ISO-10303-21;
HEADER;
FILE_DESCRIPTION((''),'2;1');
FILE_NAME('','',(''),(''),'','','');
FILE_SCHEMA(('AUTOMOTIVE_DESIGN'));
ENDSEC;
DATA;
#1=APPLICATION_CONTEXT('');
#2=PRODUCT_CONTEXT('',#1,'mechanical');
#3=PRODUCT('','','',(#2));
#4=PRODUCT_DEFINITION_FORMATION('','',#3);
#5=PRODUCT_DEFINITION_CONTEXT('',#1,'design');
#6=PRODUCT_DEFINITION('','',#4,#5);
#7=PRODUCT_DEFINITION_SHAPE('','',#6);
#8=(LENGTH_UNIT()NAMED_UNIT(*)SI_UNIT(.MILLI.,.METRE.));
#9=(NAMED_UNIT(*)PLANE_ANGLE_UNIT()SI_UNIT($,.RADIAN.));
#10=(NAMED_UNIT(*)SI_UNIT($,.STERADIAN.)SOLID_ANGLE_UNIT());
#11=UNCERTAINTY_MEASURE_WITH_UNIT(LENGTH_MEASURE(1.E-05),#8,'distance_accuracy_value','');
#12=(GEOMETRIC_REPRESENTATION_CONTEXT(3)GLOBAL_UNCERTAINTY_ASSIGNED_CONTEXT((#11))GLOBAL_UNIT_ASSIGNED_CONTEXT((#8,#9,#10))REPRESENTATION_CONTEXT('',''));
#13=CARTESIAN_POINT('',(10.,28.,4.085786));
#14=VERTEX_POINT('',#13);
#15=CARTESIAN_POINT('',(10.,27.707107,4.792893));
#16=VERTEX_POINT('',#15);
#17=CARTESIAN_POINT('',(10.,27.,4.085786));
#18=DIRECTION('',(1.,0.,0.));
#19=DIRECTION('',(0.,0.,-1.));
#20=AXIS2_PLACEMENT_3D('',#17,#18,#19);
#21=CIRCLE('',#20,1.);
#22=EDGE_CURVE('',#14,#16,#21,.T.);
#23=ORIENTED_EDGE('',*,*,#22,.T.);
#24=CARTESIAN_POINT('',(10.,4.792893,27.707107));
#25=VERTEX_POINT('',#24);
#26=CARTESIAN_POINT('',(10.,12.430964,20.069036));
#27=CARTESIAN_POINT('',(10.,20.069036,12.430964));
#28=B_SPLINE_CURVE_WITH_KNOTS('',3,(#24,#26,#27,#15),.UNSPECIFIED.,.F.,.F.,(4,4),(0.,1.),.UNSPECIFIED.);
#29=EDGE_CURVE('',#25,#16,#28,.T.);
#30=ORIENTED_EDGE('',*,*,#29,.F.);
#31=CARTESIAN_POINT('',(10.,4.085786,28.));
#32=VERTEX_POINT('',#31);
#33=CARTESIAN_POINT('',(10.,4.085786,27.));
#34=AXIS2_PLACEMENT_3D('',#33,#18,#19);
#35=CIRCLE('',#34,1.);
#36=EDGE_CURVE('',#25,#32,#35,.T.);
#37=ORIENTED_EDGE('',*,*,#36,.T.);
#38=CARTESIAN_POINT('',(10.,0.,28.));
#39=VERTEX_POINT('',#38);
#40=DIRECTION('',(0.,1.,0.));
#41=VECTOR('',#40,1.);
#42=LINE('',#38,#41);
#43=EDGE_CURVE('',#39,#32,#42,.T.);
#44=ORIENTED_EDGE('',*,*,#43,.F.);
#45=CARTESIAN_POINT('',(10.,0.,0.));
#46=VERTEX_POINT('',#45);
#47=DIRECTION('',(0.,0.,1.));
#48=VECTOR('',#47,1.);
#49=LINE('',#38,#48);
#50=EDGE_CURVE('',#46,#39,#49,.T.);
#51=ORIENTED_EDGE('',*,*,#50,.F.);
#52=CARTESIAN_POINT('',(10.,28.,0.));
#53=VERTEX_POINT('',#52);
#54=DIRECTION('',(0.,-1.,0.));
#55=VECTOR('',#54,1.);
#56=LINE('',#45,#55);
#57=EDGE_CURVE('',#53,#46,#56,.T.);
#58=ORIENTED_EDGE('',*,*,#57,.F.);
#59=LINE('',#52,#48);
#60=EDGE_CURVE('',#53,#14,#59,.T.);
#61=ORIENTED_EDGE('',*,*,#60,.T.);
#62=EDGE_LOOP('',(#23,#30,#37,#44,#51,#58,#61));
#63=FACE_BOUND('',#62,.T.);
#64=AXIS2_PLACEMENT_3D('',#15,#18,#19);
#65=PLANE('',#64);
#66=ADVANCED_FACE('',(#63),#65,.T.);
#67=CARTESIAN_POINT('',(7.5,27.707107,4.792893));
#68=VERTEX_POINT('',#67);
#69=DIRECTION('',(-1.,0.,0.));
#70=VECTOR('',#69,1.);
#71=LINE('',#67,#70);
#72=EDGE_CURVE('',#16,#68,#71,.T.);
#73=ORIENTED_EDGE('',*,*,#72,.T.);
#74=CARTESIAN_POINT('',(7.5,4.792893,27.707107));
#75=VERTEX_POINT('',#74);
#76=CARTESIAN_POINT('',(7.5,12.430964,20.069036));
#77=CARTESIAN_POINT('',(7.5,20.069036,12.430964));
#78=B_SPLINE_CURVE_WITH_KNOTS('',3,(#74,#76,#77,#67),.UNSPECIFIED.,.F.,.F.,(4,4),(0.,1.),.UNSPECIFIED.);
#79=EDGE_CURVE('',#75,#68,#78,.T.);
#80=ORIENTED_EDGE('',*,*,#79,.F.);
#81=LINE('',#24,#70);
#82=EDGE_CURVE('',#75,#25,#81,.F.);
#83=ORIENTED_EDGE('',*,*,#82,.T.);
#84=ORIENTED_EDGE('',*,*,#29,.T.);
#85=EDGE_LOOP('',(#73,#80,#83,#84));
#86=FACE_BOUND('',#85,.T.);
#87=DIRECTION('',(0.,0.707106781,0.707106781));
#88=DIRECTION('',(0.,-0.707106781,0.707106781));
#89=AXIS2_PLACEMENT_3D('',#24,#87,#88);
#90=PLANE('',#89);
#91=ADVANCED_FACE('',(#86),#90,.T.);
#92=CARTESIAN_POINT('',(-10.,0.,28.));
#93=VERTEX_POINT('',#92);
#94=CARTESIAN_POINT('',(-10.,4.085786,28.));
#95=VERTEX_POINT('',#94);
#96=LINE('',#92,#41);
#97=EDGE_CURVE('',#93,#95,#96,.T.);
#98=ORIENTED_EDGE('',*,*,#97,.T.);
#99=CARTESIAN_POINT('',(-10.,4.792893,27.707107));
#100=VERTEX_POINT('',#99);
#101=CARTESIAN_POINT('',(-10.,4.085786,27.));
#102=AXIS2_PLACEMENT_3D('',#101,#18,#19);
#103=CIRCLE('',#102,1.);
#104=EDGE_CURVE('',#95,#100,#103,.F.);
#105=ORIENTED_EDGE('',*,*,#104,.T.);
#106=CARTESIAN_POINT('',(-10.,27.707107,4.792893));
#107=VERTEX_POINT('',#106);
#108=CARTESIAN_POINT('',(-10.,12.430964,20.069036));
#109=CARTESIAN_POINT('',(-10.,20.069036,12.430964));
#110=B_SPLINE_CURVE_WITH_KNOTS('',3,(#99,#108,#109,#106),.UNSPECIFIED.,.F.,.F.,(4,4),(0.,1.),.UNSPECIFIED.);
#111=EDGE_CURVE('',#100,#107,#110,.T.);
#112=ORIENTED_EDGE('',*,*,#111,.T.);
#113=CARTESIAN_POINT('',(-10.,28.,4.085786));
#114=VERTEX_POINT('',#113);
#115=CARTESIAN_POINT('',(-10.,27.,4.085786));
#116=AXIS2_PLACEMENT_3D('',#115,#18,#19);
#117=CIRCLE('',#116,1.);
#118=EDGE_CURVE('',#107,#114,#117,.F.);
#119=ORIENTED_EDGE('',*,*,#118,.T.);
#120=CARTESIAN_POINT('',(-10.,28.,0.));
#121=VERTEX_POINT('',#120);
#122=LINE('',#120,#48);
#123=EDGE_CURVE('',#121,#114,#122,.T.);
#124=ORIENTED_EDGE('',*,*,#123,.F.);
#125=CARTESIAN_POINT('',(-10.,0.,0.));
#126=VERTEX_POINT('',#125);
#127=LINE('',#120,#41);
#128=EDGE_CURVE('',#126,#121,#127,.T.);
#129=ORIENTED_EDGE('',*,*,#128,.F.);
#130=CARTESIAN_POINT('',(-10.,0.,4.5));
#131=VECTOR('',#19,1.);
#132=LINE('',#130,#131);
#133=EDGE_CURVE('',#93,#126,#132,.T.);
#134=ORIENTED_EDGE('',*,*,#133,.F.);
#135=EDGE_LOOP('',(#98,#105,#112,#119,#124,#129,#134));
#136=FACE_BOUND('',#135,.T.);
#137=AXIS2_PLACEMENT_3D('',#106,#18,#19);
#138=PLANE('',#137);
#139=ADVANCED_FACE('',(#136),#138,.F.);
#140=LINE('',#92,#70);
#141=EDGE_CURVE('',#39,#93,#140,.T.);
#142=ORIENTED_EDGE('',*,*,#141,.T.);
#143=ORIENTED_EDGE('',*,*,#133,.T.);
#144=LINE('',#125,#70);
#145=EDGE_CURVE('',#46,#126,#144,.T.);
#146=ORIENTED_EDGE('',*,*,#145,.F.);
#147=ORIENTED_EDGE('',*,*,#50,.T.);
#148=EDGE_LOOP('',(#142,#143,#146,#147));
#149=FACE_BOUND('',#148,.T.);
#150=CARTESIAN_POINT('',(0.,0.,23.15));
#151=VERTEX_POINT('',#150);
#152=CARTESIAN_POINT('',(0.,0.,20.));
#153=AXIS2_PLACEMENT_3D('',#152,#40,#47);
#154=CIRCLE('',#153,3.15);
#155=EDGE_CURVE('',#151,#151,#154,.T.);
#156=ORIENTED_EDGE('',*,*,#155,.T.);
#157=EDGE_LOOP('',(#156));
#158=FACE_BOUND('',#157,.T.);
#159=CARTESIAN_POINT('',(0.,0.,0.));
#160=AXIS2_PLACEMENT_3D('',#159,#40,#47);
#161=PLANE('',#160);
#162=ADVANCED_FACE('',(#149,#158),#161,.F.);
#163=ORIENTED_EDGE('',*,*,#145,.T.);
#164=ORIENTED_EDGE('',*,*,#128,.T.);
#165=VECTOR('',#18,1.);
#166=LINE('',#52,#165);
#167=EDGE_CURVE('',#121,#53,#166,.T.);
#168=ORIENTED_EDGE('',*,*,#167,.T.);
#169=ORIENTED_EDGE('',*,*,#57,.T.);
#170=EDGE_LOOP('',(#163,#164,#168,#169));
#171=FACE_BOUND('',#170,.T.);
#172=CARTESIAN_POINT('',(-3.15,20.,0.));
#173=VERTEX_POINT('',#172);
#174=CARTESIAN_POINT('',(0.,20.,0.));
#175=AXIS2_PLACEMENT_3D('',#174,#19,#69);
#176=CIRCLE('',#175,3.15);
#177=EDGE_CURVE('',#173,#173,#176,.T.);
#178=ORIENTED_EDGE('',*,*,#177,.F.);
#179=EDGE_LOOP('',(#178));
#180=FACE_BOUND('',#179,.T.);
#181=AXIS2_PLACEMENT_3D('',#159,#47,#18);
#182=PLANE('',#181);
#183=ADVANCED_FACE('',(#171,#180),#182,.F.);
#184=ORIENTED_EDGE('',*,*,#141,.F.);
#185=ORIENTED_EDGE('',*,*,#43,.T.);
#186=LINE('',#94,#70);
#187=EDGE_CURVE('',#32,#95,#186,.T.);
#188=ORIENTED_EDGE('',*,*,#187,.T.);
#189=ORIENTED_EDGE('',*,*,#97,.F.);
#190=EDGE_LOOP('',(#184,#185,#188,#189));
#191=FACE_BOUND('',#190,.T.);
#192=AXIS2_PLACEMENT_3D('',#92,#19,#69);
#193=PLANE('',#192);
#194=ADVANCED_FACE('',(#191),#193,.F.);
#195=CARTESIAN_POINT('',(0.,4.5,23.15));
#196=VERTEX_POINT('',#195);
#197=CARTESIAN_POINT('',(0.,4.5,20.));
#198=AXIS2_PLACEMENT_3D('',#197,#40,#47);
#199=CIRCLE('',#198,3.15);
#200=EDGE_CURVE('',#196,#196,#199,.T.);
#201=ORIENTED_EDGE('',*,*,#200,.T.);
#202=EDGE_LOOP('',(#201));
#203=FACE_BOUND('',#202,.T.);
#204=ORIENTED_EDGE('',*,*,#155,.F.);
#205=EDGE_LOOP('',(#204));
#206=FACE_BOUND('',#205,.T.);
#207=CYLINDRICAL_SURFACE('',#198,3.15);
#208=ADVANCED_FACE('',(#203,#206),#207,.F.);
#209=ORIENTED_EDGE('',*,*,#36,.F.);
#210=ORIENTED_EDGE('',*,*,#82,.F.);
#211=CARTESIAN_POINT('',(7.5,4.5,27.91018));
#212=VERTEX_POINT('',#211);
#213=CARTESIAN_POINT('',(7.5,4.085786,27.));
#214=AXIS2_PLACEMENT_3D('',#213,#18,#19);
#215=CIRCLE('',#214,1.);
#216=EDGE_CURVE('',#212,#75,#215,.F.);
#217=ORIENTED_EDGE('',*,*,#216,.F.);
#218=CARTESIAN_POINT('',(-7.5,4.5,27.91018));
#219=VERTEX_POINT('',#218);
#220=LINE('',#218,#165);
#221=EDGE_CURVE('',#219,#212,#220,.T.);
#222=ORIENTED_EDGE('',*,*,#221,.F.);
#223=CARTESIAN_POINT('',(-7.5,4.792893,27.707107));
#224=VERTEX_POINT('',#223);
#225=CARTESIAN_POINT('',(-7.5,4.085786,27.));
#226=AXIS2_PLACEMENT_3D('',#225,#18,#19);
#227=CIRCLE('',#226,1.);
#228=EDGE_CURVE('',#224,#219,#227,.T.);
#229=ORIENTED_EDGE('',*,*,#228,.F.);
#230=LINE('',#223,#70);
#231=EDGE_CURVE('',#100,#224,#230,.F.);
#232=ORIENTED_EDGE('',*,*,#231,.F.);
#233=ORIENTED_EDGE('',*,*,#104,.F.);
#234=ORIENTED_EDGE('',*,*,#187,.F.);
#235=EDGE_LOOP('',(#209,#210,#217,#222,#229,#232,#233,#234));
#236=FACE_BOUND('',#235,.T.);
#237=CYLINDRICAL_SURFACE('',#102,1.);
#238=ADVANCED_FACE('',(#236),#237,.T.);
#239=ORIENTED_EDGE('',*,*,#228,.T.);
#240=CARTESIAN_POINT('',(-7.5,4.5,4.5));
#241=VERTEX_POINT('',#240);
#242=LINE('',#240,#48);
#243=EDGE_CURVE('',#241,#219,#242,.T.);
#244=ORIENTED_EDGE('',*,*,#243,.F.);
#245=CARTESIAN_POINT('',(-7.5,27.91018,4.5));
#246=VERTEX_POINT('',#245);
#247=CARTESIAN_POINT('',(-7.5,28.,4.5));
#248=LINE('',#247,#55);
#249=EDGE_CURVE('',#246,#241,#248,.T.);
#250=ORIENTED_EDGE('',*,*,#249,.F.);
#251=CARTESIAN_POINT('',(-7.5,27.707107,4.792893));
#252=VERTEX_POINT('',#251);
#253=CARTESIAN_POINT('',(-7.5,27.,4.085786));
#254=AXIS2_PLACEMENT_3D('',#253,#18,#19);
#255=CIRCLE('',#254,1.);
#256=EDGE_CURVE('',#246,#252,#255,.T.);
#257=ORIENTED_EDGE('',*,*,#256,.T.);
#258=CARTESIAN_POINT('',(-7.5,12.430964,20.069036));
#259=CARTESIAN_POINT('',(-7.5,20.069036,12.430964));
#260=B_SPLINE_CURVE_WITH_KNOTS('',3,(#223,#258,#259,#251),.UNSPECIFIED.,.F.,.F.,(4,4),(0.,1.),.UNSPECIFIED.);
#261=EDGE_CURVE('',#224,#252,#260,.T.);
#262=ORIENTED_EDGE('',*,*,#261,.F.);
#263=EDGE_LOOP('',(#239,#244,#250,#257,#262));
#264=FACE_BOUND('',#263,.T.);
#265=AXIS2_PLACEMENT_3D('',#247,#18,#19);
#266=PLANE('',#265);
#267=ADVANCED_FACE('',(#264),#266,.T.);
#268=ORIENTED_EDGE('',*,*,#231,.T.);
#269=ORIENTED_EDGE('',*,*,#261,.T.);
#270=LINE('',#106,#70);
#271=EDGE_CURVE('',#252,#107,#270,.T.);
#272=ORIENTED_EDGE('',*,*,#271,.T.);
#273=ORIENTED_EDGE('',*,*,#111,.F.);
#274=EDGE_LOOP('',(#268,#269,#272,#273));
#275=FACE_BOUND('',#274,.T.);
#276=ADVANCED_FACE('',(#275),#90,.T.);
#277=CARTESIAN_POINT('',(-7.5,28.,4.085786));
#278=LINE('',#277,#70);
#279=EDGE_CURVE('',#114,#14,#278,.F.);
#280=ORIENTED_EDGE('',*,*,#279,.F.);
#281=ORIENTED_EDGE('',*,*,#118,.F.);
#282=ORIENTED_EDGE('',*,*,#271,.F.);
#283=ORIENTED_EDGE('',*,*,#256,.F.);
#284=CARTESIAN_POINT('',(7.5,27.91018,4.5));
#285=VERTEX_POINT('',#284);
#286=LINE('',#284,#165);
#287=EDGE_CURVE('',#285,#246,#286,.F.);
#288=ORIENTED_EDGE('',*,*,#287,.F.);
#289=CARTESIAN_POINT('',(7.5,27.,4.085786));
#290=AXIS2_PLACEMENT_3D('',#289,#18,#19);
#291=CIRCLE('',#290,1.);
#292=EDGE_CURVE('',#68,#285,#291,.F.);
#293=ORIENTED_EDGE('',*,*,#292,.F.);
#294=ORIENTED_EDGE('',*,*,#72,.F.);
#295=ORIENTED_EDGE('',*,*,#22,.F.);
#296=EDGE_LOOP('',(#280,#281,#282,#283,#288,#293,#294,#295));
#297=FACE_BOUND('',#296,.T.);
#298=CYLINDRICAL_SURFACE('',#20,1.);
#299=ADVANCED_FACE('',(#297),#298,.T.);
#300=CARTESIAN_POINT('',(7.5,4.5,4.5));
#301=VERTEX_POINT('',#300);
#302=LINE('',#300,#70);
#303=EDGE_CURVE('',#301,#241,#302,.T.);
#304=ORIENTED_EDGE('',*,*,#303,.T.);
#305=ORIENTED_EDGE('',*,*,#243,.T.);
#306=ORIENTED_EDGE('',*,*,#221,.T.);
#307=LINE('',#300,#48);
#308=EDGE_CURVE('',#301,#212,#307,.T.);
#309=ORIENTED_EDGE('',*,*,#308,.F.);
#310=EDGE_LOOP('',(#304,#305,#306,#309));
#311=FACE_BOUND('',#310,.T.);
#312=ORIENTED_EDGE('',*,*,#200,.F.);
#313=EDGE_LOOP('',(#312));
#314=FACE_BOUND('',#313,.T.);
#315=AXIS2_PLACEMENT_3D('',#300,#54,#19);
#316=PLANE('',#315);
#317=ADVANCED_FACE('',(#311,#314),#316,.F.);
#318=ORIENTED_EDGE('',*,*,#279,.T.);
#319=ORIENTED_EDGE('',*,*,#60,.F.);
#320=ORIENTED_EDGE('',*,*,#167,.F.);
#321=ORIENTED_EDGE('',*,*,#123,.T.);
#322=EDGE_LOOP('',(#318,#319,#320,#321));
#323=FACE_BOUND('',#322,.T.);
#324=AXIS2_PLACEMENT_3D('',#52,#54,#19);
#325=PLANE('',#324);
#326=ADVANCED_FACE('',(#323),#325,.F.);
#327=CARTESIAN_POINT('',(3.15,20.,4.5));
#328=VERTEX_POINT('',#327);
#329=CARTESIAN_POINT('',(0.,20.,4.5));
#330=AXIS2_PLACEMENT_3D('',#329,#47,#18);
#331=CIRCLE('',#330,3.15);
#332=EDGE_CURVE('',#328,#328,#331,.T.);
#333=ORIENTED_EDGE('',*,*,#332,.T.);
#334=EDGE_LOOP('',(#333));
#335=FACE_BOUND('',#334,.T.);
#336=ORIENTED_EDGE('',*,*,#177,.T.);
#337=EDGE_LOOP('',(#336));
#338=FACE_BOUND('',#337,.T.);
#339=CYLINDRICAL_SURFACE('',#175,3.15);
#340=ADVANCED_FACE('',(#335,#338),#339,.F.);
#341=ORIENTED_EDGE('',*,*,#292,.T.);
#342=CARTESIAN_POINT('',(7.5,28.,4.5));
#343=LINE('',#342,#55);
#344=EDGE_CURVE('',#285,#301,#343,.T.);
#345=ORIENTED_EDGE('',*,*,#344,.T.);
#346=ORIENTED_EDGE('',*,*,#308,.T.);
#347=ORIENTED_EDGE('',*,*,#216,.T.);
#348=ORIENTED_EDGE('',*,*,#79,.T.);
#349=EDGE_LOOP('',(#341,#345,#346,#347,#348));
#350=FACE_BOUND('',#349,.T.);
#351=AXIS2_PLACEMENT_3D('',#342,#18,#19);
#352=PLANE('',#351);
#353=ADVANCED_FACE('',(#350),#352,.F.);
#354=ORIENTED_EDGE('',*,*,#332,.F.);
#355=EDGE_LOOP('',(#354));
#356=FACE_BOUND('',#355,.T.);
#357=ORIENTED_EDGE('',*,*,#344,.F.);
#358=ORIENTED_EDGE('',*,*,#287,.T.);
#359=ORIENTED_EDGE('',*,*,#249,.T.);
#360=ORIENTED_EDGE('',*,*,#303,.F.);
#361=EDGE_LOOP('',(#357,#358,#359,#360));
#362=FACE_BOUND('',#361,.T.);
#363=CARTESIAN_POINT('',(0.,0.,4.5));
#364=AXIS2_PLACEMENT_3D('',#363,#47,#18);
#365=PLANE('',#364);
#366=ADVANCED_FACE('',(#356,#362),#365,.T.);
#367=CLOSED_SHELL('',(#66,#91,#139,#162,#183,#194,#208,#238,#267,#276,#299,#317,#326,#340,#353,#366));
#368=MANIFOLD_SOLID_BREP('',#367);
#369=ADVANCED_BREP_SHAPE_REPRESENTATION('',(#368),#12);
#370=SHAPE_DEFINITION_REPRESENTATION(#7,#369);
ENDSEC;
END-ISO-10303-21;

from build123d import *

# Parameters (mm, degrees)
BOSS_EXTRUDE1_DEPTH            = 20
SKETCH2_W                      = 20
SKETCH2_H                      = 23.5
BOSS_EXTRUDE2_DEPTH            = 4.5
CUT_EXTRUDE1_DEPTH             = 15
SKETCH4_W                      = 20
SKETCH4_H                      = 28
BOSS_EXTRUDE3_DEPTH            = 4.5
F_6_3_6_3_DIAMETER_HOLE1_D     = 6.3
F_6_3_6_3_DIAMETER_HOLE1_DEPTH = 28
F_6_3_6_3_DIAMETER_HOLE2_D     = 6.3
FILLET2_START                  = -11
FILLET2_DEPTH                  = 22


with BuildPart() as part:
    # Sketch1 → Boss-Extrude1 (new body)
    with BuildSketch(Plane(origin=(-10, 0, 0), x_dir=(0, -1, 0), z_dir=(-1, 0, 0))):
        with BuildLine():
            Line((-28, 4.5), (-4.5, 4.5))
            Line((-4.5, 4.5), (-4.5, 28))
            Line((-4.5, 28), (-4.792893219, 27.707106781))
            add(Edge.make_bspline(
                [(-4.792893219, 27.707106781), (-12.430964406, 20.069035594), (-20.069035594, 12.430964406), (-27.707106781, 4.792893219)],
                knots=[0, 0, 0, 0, 1, 1, 1, 1], degree=3))
            Line((-27.707106781, 4.792893219), (-28, 4.5))
        make_face()
    extrude(amount=-BOSS_EXTRUDE1_DEPTH)

    # Sketch2 → Boss-Extrude2 (add)
    with BuildSketch(Plane.XZ.offset(-4.5)):
        with Locations((0, 16.25)):
            Rectangle(SKETCH2_W, SKETCH2_H)
    extrude(amount=BOSS_EXTRUDE2_DEPTH)

    # Sketch3 → Cut-Extrude1 (cut)
    with BuildSketch(Plane(origin=(-7.5, 0, 0), x_dir=(0, -1, 0), z_dir=(-1, 0, 0))):
        with BuildLine():
            Line((-4.5, 4.5), (-4.5, 28))
            Line((-4.5, 28), (-4.792893219, 27.707106781))
            add(Edge.make_bspline(
                [(-4.792893219, 27.707106781), (-12.430964406, 20.069035594), (-20.069035594, 12.430964406), (-27.707106781, 4.792893219)],
                knots=[0, 0, 0, 0, 1, 1, 1, 1], degree=3))
            Line((-27.707106781, 4.792893219), (-28, 4.5))
            Line((-28, 4.5), (-4.5, 4.5))
        make_face()
    extrude(amount=-CUT_EXTRUDE1_DEPTH, mode=Mode.SUBTRACT)

    # Sketch4 → Boss-Extrude3 (add)
    with BuildSketch(Plane(origin=(0, 0, 4.5), x_dir=(-1, 0, 0), z_dir=(0, 0, -1))):
        with Locations((0, 14)):
            Rectangle(SKETCH4_W, SKETCH4_H)
    extrude(amount=BOSS_EXTRUDE3_DEPTH)

    # Ø6.3 (6.3) Diameter Hole1
    with Locations(Plane(origin=(0, 0, 0), x_dir=(-1, 0, 0), z_dir=(0, 0, -1))):
        with Locations((0, 20)):
            Hole(F_6_3_6_3_DIAMETER_HOLE1_D / 2, depth=F_6_3_6_3_DIAMETER_HOLE1_DEPTH)

    # Ø6.3 (6.3) Diameter Hole2 (through all)
    with Locations(Plane(origin=(0, 4.5, 0), x_dir=(1, 0, 0), z_dir=(0, 1, 0))):
        with Locations((0, -20)):
            Hole(F_6_3_6_3_DIAMETER_HOLE2_D / 2)

    # Fillet2: read off the stored shape, not the designer's step
    # Fillet2 outline → Fillet2 (cut)
    with BuildSketch(Plane.YZ.offset(FILLET2_START)):
        with BuildLine():
            Line((28, 4.085786438), (28, 4.5))
            Line((28, 4.5), (27.707106781, 4.792893219))
            ThreePointArc((27.707106781, 4.792893219), (27.923879533, 4.46846987), (28, 4.085786438))
        make_face()
        with BuildLine():
            Line((4.792893219, 27.707106781), (4.5, 28))
            Line((4.5, 28), (4.085786438, 28))
            ThreePointArc((4.085786438, 28), (4.46846987, 27.923879533), (4.792893219, 27.707106781))
        make_face()
    extrude(amount=FILLET2_DEPTH, mode=Mode.SUBTRACT)


solid = part.part
